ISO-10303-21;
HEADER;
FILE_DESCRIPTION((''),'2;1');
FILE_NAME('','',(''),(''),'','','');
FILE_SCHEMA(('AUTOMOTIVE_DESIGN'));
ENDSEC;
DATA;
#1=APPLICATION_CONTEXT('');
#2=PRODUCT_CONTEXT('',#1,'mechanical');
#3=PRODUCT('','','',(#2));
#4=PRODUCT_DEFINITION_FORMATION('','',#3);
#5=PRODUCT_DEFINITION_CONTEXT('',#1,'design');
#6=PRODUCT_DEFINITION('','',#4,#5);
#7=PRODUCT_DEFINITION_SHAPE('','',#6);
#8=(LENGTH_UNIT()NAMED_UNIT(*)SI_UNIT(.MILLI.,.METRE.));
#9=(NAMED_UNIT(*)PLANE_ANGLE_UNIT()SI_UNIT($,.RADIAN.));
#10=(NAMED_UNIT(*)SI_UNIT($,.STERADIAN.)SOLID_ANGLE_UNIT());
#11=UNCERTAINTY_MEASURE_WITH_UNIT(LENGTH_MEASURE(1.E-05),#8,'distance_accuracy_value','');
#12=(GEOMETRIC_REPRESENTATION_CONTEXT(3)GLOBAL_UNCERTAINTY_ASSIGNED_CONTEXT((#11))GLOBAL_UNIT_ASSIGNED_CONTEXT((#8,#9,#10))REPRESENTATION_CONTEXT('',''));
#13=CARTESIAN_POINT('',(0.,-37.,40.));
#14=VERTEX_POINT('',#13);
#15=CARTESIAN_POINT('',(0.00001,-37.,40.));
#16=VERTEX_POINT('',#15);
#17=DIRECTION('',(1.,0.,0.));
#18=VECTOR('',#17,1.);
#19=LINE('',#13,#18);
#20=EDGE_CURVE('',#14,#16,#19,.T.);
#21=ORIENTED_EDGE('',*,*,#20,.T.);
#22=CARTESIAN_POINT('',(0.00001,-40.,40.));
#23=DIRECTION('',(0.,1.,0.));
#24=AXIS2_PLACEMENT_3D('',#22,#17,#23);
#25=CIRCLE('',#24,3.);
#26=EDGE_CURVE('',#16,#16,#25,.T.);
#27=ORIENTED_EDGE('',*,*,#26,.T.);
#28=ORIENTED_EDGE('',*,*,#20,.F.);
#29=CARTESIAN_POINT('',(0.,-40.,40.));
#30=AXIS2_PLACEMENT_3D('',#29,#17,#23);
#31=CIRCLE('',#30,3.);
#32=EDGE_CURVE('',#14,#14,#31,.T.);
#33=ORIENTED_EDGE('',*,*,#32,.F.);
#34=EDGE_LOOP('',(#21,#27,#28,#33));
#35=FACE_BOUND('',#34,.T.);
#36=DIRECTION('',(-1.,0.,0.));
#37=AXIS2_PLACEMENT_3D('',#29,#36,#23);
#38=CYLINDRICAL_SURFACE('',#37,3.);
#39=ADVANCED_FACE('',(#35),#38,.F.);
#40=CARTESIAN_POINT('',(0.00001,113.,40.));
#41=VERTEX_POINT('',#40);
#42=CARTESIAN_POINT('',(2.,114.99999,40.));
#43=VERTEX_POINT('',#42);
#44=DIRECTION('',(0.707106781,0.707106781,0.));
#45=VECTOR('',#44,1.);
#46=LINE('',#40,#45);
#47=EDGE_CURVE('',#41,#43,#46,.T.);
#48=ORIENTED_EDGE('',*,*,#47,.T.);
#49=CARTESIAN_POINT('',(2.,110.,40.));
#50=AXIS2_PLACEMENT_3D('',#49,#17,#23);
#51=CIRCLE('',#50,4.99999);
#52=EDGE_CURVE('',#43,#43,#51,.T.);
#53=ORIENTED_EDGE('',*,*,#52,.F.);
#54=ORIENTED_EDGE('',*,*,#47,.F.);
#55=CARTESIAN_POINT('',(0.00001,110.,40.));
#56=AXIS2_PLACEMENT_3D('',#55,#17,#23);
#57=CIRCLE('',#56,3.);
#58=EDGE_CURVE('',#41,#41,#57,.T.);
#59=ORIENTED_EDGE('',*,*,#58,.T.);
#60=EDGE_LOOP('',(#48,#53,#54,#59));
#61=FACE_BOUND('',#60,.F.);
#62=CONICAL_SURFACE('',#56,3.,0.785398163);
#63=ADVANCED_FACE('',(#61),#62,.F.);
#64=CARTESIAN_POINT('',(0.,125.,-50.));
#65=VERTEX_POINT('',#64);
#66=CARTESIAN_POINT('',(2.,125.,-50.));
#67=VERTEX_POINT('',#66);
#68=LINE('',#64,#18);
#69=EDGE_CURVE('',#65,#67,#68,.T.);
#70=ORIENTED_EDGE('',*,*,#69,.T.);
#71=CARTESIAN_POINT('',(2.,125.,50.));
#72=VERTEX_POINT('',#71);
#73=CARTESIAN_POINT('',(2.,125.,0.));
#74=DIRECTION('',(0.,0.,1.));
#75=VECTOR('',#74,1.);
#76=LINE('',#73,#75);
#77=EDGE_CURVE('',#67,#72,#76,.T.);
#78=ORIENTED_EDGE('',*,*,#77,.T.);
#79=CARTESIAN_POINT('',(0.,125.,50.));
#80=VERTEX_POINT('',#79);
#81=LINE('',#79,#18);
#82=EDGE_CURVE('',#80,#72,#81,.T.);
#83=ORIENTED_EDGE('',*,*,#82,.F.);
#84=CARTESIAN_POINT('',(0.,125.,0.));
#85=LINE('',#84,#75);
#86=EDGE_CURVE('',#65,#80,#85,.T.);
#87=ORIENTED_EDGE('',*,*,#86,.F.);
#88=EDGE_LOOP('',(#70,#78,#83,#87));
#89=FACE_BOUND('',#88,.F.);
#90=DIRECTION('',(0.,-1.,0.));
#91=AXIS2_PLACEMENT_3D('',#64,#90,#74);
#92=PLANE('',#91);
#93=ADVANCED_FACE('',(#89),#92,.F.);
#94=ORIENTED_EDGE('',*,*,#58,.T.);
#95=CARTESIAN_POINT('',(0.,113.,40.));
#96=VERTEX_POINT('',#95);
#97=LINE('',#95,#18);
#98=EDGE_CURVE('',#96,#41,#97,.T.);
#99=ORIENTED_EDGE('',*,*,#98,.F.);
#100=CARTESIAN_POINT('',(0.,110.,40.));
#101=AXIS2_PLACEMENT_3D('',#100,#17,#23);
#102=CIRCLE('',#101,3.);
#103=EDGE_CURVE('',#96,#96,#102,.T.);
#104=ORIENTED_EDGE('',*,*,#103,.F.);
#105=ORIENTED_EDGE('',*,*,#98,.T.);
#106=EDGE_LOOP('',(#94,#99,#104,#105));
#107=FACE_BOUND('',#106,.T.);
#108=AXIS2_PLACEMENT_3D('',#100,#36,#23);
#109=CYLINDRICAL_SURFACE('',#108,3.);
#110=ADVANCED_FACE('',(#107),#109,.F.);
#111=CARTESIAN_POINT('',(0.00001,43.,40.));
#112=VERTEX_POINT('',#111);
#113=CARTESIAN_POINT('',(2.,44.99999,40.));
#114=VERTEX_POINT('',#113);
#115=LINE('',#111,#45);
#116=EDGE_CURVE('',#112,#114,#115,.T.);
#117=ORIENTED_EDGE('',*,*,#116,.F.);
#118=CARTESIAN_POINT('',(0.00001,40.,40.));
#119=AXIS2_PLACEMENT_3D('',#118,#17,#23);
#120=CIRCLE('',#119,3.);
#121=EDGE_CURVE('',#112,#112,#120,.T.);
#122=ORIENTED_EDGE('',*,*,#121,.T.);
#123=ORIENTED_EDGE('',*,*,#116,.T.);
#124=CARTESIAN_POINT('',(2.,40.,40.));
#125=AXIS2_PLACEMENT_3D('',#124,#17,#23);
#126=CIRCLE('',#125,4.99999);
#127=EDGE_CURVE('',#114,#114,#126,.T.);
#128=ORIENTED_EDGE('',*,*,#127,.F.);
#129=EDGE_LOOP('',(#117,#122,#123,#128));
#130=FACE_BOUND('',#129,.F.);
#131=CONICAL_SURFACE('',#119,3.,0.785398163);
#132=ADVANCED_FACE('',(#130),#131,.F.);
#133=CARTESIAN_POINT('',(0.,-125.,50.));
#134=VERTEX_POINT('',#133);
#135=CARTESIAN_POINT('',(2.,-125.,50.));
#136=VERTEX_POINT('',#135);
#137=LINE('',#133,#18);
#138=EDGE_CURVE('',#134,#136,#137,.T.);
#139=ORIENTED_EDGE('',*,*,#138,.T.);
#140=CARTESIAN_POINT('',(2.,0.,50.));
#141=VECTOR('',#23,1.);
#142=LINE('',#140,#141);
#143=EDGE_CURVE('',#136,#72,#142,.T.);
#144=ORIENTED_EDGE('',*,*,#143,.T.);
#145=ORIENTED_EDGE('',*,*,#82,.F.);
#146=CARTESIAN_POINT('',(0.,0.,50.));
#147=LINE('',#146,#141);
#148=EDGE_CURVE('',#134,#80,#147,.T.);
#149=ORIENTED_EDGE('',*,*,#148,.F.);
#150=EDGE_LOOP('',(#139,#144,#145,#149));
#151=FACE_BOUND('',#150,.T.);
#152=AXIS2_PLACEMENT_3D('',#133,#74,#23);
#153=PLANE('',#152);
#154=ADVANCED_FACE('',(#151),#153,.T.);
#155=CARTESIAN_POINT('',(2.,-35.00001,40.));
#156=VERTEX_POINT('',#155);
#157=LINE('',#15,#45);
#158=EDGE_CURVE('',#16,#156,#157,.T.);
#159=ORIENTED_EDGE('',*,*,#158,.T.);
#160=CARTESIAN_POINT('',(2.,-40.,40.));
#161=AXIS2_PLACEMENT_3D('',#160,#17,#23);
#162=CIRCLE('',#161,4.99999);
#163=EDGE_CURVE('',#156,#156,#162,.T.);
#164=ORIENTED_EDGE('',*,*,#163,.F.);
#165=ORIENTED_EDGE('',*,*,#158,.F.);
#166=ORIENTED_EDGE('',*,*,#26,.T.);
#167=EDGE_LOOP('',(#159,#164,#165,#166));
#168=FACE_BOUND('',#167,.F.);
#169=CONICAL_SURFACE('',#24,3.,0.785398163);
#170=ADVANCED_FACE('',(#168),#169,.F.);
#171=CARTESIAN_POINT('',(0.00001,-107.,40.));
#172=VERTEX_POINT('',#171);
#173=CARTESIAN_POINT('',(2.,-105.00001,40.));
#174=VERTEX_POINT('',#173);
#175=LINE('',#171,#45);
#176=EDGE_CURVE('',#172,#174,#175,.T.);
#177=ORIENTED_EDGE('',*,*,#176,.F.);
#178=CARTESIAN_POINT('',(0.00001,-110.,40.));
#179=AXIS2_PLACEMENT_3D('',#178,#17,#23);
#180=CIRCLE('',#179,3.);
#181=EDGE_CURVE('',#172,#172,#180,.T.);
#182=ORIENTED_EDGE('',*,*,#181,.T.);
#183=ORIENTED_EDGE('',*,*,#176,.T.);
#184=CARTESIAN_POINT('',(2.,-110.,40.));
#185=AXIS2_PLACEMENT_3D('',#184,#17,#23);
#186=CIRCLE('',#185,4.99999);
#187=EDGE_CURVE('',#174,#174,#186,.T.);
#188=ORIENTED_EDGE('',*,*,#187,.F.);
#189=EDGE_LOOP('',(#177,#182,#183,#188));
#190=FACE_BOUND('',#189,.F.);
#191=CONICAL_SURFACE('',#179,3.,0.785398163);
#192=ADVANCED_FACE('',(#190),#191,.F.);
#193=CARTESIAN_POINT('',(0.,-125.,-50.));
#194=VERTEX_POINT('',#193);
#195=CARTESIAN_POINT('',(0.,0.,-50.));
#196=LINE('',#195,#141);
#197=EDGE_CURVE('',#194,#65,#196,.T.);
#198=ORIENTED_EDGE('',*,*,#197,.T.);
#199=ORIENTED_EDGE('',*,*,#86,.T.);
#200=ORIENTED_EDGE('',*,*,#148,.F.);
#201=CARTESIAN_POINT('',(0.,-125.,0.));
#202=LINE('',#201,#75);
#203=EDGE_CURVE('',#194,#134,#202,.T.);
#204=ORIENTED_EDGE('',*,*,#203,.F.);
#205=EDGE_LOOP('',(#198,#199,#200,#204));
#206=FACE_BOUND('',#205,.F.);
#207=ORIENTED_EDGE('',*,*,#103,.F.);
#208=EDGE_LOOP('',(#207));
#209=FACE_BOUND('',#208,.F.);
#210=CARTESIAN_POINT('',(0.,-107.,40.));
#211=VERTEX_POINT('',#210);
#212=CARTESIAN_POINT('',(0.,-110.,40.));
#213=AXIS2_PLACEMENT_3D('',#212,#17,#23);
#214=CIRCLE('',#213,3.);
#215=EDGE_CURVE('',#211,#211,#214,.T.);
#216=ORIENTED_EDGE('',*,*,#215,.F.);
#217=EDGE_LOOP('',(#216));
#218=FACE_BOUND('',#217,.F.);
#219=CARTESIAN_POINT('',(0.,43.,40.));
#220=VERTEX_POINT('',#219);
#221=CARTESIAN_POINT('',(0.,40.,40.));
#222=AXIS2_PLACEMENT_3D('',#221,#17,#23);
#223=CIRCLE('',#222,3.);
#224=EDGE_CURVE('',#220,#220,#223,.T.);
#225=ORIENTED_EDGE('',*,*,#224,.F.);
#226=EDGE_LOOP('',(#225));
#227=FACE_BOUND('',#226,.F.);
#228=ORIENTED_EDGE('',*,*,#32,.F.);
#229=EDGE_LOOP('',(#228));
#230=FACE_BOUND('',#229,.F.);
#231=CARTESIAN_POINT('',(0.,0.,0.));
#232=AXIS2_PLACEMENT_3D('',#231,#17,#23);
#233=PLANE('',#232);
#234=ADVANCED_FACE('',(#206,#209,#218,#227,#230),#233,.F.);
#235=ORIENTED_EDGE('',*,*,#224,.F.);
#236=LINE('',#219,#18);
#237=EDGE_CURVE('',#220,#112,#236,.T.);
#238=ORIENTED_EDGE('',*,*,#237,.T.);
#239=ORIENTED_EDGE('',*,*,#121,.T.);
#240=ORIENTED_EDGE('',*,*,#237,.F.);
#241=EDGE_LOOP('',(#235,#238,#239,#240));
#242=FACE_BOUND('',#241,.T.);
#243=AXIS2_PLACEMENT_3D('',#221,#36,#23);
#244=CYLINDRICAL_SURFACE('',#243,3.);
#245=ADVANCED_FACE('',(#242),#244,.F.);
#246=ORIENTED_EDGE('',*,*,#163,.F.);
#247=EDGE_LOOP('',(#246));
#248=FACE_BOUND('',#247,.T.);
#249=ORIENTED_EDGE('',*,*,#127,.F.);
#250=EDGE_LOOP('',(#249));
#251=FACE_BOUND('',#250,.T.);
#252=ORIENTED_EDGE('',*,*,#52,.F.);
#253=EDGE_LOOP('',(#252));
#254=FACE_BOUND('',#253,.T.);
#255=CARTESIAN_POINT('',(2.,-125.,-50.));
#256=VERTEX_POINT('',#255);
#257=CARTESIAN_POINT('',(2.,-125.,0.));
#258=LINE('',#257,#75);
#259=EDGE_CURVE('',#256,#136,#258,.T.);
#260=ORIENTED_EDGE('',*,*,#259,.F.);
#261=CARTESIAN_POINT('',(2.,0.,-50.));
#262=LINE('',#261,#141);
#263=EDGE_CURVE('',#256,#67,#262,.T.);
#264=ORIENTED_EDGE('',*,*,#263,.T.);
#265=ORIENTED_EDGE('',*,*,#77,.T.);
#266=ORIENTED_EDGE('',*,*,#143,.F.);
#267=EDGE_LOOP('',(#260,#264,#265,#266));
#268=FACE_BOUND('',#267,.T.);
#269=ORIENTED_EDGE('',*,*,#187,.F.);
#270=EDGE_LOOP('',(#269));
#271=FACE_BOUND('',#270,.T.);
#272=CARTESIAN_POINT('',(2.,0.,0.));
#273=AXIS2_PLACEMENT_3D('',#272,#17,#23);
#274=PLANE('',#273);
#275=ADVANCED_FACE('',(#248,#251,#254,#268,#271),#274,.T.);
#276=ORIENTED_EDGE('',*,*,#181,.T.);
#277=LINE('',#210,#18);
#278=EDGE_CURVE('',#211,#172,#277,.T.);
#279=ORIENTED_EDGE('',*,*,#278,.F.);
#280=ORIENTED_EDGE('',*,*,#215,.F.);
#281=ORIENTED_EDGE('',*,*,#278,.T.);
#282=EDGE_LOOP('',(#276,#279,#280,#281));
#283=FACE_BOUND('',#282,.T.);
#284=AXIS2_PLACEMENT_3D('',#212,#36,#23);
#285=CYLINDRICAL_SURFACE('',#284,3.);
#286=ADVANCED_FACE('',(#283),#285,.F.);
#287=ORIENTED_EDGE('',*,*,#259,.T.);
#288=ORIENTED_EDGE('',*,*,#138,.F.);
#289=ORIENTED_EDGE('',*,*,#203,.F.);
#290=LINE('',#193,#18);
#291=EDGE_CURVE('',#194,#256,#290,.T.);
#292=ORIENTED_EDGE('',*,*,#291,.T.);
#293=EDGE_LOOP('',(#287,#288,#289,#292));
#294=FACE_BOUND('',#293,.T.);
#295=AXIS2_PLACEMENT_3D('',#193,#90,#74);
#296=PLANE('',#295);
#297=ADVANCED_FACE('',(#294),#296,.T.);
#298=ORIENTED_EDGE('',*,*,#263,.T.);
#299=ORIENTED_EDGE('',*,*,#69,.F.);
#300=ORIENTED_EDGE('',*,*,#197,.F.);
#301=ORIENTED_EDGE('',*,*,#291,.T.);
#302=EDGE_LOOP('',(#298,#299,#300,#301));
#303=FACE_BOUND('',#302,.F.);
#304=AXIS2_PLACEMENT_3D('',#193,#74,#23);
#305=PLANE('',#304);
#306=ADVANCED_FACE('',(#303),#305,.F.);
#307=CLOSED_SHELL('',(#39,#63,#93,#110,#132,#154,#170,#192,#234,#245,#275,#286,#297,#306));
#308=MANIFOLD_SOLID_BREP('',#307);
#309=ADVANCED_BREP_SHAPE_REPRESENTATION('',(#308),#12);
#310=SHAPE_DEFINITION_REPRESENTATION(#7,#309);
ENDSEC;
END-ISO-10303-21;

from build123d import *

# Parameters (mm, degrees)
F0_W     = 250
F0_H     = 100
F0_R     = 3
F1_DEPTH = 2
F2_SIZE  = 1.99999


# Not quite as in the source:
# - a fillet or chamfer is up to 0.001 mm smaller than in the source, because OpenCascade refuses the exact size


with BuildPart() as f1:
    # F0 (on Right) → F1 (new body)
    with BuildSketch(Plane.YZ):
        Rectangle(F0_W, F0_H)
        with Locations((-110, 40)):
            Circle(F0_R, mode=Mode.SUBTRACT)
        with Locations((-40, 40)):
            Circle(F0_R, mode=Mode.SUBTRACT)
        with Locations((40, 40)):
            Circle(F0_R, mode=Mode.SUBTRACT)
        with Locations((110, 40)):
            Circle(F0_R, mode=Mode.SUBTRACT)
    extrude(amount=F1_DEPTH)

    # F2 (size 2 in the source; OpenCascade refuses exactly that, so slightly less here)
    f2_edges = [f1.edges().sort_by_distance(p)[0] for p in [
        (2, -113, 40),
        (2, -43, 40),
        (2, 37, 40),
        (2, 107, 40),
    ]]
    chamfer(f2_edges, length=F2_SIZE)


solid = f1.part
